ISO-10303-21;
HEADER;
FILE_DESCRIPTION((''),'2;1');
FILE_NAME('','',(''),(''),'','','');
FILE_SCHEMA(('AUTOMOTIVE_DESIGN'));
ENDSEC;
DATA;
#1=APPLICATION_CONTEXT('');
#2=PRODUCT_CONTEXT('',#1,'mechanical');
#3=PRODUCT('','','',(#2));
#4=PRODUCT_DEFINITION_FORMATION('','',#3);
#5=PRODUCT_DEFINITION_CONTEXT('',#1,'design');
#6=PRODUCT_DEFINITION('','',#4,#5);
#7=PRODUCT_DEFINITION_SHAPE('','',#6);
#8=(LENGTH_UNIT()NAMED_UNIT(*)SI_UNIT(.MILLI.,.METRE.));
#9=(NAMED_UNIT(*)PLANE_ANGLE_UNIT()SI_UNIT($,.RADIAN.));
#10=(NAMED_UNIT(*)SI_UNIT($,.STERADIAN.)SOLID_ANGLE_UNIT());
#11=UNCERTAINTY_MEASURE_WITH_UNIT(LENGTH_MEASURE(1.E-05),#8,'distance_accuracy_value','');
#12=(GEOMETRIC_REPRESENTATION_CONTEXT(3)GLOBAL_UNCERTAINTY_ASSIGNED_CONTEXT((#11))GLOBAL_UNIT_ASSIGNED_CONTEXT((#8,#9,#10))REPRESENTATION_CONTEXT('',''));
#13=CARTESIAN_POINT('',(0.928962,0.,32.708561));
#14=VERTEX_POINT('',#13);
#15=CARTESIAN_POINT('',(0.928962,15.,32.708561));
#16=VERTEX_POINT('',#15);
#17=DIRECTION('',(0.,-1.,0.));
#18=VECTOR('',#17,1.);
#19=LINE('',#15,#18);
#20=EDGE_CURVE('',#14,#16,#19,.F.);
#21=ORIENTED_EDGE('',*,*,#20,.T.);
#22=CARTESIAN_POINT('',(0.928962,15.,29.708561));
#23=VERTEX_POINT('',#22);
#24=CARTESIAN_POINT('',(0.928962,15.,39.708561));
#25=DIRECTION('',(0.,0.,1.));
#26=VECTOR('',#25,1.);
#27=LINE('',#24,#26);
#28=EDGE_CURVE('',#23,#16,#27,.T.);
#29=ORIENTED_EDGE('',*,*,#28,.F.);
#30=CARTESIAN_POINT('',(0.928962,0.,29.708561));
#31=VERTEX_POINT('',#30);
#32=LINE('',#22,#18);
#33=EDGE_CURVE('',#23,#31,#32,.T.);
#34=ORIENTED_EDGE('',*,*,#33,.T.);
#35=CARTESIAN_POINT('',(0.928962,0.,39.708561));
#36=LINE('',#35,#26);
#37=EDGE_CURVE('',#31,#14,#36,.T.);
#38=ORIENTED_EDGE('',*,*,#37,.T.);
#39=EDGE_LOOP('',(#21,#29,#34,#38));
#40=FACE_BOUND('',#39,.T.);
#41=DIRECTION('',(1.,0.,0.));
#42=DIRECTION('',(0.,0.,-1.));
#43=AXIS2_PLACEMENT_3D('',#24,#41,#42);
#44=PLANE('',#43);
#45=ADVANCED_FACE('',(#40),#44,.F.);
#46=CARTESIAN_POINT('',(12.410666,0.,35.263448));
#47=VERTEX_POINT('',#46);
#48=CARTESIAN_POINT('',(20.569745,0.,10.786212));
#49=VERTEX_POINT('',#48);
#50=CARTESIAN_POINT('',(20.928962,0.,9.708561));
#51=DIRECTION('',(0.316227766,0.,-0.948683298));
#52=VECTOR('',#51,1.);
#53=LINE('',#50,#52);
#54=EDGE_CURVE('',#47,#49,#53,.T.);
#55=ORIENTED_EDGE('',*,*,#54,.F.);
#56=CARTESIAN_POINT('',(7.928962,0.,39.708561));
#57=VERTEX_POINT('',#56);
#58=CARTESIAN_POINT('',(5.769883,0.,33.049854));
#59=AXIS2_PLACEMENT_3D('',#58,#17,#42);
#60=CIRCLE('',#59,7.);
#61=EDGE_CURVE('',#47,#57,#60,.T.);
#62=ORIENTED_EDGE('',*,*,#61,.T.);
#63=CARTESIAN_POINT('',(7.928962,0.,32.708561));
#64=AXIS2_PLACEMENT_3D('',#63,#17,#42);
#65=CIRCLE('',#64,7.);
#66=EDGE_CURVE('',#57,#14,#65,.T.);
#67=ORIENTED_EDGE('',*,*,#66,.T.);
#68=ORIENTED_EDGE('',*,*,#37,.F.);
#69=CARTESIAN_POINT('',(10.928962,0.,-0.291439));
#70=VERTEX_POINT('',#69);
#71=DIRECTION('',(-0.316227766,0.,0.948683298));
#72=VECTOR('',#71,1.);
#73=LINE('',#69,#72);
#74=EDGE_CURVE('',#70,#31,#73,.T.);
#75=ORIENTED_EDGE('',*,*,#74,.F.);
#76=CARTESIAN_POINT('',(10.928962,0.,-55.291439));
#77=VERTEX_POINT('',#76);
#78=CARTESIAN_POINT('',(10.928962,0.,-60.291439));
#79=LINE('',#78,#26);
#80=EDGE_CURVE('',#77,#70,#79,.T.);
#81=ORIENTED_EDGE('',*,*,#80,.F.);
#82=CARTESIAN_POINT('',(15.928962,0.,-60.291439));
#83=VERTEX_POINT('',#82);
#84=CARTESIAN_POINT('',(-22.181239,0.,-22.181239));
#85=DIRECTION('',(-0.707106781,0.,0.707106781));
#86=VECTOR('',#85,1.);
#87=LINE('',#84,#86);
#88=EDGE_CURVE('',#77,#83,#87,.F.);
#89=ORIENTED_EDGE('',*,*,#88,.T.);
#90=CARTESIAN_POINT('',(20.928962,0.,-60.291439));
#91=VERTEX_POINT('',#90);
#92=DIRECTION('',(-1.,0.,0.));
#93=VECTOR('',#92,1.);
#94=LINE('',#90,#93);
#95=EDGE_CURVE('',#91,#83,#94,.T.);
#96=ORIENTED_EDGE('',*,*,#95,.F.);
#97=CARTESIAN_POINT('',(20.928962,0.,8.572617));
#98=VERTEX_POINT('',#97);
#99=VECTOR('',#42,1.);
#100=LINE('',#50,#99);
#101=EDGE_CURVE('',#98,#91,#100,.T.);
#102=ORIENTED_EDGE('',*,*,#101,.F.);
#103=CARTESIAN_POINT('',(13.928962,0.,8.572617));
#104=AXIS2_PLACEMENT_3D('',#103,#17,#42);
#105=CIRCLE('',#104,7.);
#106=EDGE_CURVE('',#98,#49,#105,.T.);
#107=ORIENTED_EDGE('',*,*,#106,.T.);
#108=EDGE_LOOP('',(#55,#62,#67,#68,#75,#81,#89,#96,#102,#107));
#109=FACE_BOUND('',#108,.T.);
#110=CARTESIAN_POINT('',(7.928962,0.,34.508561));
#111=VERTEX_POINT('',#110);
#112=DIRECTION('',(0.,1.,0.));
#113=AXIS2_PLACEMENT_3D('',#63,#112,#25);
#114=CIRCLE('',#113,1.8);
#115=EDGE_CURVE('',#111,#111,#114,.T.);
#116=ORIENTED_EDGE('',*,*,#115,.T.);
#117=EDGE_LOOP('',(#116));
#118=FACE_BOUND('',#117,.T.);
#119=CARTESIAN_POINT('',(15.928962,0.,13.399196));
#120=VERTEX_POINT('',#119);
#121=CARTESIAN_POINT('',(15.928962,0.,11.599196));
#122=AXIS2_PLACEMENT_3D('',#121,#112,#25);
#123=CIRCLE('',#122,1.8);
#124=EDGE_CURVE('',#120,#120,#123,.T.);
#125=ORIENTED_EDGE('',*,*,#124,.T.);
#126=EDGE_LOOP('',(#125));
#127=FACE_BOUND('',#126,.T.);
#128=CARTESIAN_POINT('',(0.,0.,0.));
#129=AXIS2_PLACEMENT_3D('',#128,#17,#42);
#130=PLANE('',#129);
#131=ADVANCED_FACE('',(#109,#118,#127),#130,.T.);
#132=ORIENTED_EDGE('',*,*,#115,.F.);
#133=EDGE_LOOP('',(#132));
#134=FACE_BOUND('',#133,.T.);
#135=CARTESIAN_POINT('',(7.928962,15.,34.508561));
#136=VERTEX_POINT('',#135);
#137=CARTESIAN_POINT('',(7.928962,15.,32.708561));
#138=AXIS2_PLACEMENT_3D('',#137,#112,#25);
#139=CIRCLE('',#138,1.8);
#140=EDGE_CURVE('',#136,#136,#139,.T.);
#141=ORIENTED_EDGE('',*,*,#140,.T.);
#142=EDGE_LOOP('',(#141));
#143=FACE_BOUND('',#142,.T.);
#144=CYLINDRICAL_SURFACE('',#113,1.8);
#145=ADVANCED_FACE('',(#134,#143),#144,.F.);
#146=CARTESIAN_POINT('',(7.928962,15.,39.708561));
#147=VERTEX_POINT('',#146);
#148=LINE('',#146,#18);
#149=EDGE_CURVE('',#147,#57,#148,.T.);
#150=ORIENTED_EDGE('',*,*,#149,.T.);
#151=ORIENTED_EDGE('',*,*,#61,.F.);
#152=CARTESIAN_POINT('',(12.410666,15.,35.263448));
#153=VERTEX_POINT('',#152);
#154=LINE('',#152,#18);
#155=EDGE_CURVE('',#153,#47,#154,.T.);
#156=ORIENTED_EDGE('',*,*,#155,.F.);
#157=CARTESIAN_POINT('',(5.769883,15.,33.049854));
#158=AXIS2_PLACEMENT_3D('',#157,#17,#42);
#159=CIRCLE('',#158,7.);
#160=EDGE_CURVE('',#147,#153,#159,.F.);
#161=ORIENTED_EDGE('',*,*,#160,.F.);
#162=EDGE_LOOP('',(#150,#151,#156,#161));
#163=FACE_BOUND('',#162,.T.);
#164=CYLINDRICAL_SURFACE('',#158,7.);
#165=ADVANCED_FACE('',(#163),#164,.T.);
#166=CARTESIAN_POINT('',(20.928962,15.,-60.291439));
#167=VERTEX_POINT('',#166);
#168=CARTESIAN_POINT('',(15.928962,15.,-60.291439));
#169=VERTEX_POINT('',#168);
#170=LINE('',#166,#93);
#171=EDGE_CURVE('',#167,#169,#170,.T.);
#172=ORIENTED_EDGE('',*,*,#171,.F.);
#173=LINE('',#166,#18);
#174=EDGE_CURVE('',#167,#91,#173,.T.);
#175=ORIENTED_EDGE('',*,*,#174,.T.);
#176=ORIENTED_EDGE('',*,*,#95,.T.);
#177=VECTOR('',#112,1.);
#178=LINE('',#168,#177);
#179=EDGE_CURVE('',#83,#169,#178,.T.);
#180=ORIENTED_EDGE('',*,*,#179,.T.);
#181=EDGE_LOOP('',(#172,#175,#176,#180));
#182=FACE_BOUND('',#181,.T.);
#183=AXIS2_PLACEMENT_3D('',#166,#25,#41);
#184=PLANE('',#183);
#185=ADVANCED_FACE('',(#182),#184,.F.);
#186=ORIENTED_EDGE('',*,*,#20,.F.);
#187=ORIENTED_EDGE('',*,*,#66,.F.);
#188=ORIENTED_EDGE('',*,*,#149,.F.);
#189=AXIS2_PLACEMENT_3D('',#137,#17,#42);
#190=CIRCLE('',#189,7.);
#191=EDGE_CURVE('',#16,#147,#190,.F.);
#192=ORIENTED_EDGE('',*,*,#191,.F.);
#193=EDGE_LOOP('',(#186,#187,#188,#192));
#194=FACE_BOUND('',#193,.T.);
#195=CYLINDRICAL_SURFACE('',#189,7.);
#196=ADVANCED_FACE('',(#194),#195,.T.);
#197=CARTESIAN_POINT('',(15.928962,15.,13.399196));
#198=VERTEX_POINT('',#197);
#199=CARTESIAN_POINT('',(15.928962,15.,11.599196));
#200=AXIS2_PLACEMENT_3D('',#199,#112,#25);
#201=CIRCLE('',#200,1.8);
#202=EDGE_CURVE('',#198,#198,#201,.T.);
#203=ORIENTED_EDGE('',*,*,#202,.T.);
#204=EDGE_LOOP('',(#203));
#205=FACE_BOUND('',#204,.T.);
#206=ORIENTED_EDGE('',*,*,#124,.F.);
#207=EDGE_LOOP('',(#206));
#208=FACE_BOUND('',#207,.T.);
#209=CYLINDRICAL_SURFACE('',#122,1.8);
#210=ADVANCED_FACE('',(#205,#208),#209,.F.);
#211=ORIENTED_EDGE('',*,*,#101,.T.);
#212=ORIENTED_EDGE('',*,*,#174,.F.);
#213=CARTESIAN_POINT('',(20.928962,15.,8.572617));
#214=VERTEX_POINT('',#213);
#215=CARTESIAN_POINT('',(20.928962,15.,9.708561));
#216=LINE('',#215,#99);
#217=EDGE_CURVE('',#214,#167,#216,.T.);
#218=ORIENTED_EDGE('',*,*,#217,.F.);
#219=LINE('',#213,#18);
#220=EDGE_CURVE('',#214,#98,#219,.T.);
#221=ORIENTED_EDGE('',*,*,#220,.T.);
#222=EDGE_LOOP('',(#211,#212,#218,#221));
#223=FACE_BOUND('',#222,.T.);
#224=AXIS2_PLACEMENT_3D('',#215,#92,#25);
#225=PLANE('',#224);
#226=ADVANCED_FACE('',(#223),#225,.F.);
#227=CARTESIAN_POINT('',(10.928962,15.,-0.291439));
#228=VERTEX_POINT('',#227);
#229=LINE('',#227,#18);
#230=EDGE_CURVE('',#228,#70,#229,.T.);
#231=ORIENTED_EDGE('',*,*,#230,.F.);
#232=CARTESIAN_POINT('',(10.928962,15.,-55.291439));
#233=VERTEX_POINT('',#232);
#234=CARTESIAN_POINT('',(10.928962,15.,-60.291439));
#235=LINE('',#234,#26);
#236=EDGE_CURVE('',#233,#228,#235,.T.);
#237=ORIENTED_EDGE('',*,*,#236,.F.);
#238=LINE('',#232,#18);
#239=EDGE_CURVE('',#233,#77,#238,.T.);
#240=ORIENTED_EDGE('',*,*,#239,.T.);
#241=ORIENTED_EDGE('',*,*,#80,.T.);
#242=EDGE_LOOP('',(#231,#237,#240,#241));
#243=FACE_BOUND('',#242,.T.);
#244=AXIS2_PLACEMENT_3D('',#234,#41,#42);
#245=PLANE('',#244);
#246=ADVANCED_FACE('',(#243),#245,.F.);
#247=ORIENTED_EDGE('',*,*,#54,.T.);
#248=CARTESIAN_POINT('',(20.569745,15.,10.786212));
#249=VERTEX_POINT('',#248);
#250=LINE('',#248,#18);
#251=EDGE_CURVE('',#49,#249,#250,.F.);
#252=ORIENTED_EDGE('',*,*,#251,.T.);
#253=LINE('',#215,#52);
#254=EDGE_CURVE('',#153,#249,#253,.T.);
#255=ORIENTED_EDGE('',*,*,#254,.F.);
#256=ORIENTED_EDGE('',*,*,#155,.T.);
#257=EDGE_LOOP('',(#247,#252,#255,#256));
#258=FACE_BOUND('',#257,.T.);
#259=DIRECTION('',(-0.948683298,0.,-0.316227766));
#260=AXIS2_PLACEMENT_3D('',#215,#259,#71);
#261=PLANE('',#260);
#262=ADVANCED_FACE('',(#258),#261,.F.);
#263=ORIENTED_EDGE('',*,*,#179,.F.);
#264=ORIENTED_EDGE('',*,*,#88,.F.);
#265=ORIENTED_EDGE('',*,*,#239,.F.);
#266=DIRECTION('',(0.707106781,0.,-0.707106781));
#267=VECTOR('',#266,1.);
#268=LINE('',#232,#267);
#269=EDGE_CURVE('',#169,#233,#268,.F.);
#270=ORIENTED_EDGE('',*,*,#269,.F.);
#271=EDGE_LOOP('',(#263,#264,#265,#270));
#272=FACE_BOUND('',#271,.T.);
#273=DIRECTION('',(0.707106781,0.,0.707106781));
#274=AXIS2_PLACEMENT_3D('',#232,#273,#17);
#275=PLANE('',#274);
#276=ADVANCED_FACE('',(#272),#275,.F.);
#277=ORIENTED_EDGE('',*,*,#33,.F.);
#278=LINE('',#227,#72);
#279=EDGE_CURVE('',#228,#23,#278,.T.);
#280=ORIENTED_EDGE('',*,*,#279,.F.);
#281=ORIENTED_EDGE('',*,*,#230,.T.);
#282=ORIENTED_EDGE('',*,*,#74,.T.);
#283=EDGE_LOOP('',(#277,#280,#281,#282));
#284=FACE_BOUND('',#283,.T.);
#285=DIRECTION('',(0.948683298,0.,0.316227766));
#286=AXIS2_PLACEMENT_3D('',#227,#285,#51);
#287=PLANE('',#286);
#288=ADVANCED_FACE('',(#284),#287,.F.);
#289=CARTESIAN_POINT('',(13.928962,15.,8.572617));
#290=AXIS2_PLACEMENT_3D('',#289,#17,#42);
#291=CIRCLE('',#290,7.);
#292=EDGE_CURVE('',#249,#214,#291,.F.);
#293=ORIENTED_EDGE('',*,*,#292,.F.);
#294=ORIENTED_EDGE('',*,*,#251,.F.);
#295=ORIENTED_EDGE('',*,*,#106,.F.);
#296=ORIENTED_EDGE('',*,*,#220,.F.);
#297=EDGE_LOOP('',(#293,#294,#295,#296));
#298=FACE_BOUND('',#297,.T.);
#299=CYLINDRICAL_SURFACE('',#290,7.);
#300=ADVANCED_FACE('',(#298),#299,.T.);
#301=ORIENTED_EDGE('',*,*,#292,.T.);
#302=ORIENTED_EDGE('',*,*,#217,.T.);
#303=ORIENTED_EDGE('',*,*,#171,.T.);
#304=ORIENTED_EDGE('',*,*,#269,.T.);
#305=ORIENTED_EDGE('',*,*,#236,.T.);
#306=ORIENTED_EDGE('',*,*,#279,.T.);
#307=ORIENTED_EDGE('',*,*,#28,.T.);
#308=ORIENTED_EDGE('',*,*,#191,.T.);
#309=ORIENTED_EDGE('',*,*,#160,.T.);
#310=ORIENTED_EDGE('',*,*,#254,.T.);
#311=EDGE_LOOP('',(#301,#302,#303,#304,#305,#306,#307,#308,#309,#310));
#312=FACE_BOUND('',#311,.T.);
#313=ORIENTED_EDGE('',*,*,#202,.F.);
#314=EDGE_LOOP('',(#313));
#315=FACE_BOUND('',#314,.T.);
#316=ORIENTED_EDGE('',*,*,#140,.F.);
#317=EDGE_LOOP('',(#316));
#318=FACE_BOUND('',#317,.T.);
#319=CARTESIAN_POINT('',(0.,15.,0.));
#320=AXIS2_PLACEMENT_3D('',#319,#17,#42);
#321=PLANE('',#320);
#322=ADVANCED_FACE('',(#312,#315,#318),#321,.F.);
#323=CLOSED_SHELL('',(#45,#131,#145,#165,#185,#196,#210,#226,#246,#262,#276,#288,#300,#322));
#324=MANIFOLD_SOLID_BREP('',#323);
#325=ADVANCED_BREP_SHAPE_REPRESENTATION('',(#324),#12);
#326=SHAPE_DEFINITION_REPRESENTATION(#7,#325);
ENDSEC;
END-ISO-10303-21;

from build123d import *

# Parameters (mm, degrees)
BOSS_EXTRUDE1_DEPTH = 15
FILLET1_R           = 7
SKETCH2_R           = 1.8
CUT_EXTRUDE1_DEPTH  = 66.559736532
FILLET3_R           = 7
FILLET5_R           = 7
CHAMFER2_SIZE       = 5


with BuildPart() as part:
    # Sketch1 → Boss-Extrude1 (new body)
    with BuildSketch(Plane(origin=(0, 0, 0), x_dir=(1, 0, 0), z_dir=(0, 1, 0))):
        Polygon((10.928961749, 60.29143898), (10.928961749, 0.29143898), (0.928961749, -29.70856102), (0.928961749, -39.70856102), (10.928961749, -39.70856102), (20.928961749, -9.70856102), (20.928961749, 60.29143898), align=None)
    extrude(amount=BOSS_EXTRUDE1_DEPTH)

    # Fillet1
    fillet1_edges = [part.edges().sort_by_distance(p)[0] for p in [
        (0.928961749, 7.5, 39.70856102),
    ]]
    fillet(fillet1_edges, radius=FILLET1_R)

    # Sketch2 → Cut-Extrude1 (cut, through all)
    with BuildSketch(Plane(origin=(0, 15, 0), x_dir=(1, 0, 0), z_dir=(0, 1, 0))):
        with Locations(Location((15.928961749, -11.599196317, 0), (0, 0, 270))):
            Circle(SKETCH2_R)
        with Locations(Location((7.928961749, -32.70856102, 0), (0, 0, 270))):
            Circle(SKETCH2_R)
    extrude(amount=-CUT_EXTRUDE1_DEPTH, mode=Mode.SUBTRACT)

    # Fillet3
    # the kernel refuses this fillet: 7 mm, written as the material it takes off along each edge
    with BuildSketch(Plane(origin=(10.928961749, -11.713900217, 39.70856102), x_dir=(-1, 0, 0), z_dir=(0, 1, 0))) as fillet3_piece_1:
        with BuildLine():
            CenterArc((5.159078888, -6.658706958), FILLET3_R, 107.965233202, 53.599817975)
            Line((-1.481704199, -4.445112596), (-1.61451986, -4.400840709))
            Line((-1.61451986, -4.400840709), (-0.132815662, 0.044271887))
            Line((-0.132815662, 0.044271887), (0, 0.14))
            ThreePointArc((0, 0.14), (1.5, 0.14), (2.956818422, 0.133174139))
            Line((2.956818422, 0.133174139), (3, 0))
        make_face()
    extrude(amount=38.427800433, mode=Mode.SUBTRACT)

    # Fillet5
    fillet5_edges = [part.edges().sort_by_distance(p)[0] for p in [
        (20.928961749, 7.5, 9.70856102),
    ]]
    fillet(fillet5_edges, radius=FILLET5_R)

    # Chamfer2
    chamfer2_edges = [part.edges().sort_by_distance(p)[0] for p in [
        (10.928961749, 7.5, -60.29143898),
    ]]
    chamfer(chamfer2_edges, length=CHAMFER2_SIZE)


solid = part.part
